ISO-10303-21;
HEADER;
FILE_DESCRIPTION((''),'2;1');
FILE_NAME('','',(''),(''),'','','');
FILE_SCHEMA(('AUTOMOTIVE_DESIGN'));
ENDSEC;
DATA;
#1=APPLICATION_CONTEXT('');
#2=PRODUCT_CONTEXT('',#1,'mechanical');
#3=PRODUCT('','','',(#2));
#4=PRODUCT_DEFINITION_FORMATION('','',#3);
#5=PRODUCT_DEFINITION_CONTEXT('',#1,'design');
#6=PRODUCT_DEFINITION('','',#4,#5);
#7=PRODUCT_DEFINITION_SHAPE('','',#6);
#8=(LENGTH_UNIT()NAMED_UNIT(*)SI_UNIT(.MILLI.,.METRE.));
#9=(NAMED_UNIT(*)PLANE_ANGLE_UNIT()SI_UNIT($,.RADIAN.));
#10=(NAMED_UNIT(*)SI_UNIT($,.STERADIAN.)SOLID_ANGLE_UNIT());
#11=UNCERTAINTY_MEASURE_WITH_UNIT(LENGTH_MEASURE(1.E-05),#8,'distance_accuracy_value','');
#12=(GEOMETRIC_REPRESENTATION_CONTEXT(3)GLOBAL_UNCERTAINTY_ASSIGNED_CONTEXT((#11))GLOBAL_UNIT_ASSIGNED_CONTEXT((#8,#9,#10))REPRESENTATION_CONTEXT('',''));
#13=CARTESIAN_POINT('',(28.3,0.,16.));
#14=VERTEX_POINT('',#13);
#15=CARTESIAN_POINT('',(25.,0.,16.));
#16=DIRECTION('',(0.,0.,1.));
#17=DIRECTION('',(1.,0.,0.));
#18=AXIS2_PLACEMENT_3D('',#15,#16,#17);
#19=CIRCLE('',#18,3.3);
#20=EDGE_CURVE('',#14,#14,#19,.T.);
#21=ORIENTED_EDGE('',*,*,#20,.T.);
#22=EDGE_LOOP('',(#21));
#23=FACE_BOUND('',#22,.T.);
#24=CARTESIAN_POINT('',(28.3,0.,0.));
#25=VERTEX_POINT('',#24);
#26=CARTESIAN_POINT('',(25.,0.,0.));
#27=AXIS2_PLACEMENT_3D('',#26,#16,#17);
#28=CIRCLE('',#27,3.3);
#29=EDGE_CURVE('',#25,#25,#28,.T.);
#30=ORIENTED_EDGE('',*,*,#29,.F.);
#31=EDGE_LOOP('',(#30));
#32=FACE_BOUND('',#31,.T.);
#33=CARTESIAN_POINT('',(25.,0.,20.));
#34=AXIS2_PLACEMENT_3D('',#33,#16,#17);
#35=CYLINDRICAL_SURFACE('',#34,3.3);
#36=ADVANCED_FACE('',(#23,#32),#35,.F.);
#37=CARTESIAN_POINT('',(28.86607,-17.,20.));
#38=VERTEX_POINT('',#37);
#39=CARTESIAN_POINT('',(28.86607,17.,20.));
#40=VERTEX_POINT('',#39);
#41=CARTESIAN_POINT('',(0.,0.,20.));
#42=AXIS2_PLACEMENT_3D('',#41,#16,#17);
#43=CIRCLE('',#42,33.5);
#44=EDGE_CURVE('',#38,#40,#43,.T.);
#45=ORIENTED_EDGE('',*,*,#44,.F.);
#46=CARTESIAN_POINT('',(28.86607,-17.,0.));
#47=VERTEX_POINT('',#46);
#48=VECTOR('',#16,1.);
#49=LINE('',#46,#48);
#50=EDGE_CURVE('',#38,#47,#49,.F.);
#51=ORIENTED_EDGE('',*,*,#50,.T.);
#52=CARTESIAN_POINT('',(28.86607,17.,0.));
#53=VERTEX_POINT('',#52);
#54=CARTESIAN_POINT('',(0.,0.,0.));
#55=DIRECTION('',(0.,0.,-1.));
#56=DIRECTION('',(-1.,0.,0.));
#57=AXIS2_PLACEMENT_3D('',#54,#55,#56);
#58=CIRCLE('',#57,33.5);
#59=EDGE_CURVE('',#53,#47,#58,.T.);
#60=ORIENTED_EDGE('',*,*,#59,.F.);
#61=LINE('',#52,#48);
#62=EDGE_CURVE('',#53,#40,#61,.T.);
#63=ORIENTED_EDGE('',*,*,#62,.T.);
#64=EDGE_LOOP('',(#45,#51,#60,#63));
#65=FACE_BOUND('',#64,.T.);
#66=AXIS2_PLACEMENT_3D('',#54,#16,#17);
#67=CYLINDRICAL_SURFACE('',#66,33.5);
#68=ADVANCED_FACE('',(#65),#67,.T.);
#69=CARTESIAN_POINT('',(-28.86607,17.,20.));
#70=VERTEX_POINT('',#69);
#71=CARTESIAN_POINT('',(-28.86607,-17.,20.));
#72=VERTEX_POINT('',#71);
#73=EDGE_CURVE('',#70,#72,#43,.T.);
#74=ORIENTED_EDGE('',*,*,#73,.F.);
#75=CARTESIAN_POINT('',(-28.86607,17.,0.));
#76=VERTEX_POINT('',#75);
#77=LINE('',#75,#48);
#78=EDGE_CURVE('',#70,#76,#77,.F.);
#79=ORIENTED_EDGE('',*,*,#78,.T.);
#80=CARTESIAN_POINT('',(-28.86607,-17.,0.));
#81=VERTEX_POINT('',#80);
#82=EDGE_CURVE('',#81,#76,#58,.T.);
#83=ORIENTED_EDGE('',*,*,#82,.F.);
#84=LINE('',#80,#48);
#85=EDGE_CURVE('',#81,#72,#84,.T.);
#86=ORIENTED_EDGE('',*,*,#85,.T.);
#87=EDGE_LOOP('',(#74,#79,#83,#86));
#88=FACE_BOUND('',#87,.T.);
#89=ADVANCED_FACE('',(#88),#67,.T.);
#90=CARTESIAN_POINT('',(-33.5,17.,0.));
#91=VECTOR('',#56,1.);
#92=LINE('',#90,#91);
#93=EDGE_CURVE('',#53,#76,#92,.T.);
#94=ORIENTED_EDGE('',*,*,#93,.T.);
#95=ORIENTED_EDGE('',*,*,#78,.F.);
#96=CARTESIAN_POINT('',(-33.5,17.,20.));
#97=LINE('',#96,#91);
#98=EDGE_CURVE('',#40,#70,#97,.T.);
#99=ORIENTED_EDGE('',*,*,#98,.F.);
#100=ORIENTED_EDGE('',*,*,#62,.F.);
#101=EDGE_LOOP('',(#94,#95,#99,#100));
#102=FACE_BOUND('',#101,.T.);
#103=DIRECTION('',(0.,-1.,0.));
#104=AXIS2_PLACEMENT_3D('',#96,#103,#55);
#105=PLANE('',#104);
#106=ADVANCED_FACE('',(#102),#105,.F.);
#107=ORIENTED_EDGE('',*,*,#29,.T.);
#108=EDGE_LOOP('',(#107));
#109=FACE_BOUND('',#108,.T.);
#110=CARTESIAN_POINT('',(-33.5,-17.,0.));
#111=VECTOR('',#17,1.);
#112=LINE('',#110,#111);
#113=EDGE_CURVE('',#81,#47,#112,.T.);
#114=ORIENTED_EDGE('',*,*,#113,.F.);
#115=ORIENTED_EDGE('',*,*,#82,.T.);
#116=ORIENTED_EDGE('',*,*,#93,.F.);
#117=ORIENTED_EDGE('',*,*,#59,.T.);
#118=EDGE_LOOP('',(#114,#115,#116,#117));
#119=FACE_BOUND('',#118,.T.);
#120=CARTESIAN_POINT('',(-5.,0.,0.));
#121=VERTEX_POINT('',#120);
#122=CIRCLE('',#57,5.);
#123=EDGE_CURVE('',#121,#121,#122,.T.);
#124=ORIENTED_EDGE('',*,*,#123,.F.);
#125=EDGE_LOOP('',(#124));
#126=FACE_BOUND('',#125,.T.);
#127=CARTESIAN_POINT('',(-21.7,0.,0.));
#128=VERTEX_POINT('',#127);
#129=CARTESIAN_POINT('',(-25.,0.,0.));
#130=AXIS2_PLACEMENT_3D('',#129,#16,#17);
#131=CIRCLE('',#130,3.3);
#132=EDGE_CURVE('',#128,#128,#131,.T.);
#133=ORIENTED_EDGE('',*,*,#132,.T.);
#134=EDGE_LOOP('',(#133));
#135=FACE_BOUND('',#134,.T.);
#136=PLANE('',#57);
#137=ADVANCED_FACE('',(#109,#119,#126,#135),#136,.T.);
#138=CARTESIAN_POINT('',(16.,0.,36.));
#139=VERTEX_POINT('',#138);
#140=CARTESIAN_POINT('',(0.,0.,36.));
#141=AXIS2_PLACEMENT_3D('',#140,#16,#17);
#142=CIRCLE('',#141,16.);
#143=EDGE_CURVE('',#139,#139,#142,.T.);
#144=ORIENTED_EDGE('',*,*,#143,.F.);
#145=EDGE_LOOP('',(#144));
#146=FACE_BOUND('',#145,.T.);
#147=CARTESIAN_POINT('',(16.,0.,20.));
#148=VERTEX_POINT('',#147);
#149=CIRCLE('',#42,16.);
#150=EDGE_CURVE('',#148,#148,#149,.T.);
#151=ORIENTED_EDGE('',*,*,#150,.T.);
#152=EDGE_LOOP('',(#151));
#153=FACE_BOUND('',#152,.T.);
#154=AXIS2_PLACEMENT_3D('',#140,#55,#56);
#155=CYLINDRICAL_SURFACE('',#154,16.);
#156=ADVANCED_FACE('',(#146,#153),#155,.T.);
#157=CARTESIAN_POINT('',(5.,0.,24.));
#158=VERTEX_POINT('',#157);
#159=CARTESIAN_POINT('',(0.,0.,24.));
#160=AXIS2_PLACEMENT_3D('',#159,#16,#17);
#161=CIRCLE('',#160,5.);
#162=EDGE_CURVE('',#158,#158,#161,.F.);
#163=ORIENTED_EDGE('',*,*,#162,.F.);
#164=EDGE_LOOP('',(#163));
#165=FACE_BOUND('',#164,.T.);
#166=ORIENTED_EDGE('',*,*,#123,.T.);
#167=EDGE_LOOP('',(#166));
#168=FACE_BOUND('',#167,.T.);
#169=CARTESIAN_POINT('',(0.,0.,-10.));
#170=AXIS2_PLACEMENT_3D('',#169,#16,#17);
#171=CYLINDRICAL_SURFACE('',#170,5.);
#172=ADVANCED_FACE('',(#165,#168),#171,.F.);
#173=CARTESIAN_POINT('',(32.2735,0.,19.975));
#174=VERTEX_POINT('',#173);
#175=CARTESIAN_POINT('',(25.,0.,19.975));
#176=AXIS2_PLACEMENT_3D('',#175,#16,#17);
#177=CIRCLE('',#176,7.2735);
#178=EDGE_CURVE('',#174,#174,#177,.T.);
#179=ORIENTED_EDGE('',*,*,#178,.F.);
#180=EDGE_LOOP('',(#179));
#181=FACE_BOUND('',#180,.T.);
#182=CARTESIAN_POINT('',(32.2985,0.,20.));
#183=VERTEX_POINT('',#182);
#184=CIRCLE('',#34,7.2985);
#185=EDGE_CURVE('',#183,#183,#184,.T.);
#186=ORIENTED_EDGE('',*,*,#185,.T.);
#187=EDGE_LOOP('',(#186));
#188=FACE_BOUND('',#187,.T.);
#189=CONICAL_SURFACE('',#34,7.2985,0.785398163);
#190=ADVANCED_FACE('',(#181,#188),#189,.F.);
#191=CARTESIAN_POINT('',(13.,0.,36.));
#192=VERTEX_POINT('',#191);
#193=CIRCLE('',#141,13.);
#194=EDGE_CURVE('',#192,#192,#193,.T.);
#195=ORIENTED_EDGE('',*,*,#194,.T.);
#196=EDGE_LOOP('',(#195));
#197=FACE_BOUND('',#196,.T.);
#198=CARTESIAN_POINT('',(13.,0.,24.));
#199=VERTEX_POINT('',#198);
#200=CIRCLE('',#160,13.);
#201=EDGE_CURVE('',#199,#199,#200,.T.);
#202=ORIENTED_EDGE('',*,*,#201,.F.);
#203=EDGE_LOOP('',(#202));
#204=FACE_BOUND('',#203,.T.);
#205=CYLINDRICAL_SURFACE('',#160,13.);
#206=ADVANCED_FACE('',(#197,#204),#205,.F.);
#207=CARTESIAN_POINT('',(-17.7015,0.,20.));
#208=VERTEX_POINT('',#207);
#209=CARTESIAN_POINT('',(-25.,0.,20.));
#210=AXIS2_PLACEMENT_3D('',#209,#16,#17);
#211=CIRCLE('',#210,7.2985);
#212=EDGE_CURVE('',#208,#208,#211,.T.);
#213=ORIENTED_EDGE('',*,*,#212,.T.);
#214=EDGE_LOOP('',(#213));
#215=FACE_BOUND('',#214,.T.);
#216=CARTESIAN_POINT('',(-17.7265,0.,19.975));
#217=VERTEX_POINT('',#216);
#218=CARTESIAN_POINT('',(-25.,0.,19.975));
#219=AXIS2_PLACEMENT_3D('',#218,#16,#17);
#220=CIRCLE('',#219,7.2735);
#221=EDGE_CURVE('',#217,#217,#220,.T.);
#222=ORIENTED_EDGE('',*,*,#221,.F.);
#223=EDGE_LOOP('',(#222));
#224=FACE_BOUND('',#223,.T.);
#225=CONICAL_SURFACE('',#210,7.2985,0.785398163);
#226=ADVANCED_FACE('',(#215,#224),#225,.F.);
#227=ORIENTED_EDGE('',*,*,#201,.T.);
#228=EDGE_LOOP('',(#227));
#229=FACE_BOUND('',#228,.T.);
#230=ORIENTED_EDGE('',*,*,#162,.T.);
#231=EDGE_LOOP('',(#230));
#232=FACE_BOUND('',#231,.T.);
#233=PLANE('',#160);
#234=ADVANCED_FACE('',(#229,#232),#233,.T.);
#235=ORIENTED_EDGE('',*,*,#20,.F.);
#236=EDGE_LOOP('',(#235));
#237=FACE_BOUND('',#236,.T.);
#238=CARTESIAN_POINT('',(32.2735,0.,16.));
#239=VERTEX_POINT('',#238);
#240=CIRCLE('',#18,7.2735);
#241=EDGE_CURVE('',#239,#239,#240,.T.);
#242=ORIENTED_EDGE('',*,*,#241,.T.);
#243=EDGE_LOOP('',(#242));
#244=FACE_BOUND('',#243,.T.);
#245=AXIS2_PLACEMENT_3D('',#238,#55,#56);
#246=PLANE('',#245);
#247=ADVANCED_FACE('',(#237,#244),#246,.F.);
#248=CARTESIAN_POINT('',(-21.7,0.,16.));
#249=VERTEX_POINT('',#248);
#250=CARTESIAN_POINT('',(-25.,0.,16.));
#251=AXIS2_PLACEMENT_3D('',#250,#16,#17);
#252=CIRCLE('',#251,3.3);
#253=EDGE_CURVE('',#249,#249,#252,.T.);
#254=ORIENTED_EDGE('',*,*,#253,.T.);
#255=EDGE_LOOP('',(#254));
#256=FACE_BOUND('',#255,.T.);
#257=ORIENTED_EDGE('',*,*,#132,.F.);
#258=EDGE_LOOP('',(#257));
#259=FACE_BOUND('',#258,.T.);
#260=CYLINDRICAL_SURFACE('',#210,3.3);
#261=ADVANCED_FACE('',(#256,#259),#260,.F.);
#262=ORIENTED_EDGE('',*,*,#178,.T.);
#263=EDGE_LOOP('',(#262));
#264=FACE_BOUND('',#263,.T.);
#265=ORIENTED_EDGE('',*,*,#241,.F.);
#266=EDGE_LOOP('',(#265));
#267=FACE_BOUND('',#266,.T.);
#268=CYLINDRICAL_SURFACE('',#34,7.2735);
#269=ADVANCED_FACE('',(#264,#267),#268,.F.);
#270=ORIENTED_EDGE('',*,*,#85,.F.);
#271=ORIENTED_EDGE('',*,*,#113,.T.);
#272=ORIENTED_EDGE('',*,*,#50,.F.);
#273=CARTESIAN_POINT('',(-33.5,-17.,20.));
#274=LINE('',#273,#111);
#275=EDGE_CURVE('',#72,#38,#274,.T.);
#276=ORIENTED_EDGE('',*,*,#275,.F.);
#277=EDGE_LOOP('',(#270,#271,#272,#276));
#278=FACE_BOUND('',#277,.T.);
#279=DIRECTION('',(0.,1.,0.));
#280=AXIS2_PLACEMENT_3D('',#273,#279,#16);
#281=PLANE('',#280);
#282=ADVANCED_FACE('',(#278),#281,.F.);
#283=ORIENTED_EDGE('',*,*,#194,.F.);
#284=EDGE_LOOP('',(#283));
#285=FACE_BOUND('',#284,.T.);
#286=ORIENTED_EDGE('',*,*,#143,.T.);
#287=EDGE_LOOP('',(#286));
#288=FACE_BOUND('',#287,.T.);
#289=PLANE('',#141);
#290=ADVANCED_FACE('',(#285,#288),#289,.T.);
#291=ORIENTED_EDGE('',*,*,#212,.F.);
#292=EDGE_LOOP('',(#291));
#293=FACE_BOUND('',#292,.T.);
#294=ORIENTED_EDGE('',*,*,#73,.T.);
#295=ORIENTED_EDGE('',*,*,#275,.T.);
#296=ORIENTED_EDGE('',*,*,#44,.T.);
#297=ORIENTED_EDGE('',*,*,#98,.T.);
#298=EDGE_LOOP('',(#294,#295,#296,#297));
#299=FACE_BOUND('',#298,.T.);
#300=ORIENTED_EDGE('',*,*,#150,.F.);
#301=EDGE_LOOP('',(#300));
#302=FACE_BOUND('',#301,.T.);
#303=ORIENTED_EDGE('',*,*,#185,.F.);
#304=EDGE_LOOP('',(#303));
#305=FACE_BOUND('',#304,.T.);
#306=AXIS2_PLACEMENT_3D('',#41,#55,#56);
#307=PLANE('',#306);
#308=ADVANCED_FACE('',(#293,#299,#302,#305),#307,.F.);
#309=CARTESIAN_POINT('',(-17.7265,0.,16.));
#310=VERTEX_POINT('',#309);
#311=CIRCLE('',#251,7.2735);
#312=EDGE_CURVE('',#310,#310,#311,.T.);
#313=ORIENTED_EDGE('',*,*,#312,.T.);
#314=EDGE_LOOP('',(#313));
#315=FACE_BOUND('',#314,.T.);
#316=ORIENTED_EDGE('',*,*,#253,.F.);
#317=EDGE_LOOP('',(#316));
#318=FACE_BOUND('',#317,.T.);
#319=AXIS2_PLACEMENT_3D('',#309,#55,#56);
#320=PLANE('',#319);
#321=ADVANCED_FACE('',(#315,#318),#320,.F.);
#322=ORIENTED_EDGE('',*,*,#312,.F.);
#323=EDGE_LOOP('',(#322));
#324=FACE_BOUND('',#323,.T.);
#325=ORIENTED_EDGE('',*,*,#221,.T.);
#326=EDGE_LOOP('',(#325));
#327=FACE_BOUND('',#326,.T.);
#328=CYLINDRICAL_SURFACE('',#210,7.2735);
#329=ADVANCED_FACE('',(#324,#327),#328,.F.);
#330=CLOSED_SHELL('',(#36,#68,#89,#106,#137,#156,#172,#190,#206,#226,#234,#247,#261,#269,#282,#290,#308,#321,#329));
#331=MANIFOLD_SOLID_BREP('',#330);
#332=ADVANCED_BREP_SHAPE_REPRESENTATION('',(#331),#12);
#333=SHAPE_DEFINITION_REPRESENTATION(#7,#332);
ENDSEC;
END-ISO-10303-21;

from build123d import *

# Parameters (mm, degrees)
SKETCH1_W                              = 67
SKETCH1_H                              = 34
BOSS_EXTRUDE1_DEPTH                    = 20
CUT_EXTRUDE1_START                     = -20
CUT_EXTRUDE1_DEPTH                     = 20
SKETCH3_R                              = 16
BOSS_EXTRUDE2_DEPTH                    = 16
CBORE_FOR_M6_HEX_HEAD_BOLT1_AT_2_COUNT = 2
CBORE_FOR_M6_HEX_HEAD_BOLT1_AT_2_PITCH = 50
SKETCH9_R                              = 5
CUT_EXTRUDE2_DEPTH                     = 46
SKETCH10_R                             = 13
CUT_EXTRUDE3_DEPTH                     = 12


# Read off the part's stored shape, not the designer's step: Cut-Extrude1
with BuildPart() as part:
    # Sketch1 → Boss-Extrude1 (new body)
    with BuildSketch(Plane.XY):
        Rectangle(SKETCH1_W, SKETCH1_H)
    extrude(amount=BOSS_EXTRUDE1_DEPTH)

    # Cut-Extrude1 outline → Cut-Extrude1 (cut)
    with BuildSketch(Plane.XY.offset(20).offset(CUT_EXTRUDE1_START)):
        with BuildLine():
            ThreePointArc((-33.5, -3.1e-08), (-32.320762268, 8.810126358), (-28.866070048, 17))
            Line((-28.866070048, 17), (-33.5, 17))
            Line((-33.5, 17), (-33.5, -3.1e-08))
        make_face()
        with BuildLine():
            ThreePointArc((-28.866070048, -17), (-32.32076226, -8.810126387), (-33.5, -3.1e-08))
            Line((-33.5, -3.1e-08), (-33.5, -17))
            Line((-33.5, -17), (-28.866070048, -17))
        make_face()
        with BuildLine():
            Line((33.5, 17), (28.866070048, 17))
            ThreePointArc((28.866070048, 17), (32.32076226, 8.810126387), (33.5, 3.1e-08))
            Line((33.5, 3.1e-08), (33.5, 17))
        make_face()
        with BuildLine():
            Line((33.5, -17), (33.5, 3.1e-08))
            ThreePointArc((33.5, 3.1e-08), (32.320762268, -8.810126358), (28.866070048, -17))
            Line((28.866070048, -17), (33.5, -17))
        make_face()
    extrude(amount=CUT_EXTRUDE1_DEPTH, mode=Mode.SUBTRACT)

    # Sketch3 → Boss-Extrude2 (add)
    with BuildSketch(Plane.XY.offset(20)):
        Circle(SKETCH3_R)
    extrude(amount=BOSS_EXTRUDE2_DEPTH)

    # Sketch8 → CBORE for M6 Hex Head Bolt1 (revolve, cut)
    with BuildSketch(Plane(origin=(-25, 0, 20), x_dir=(0, -1, 0), z_dir=(1, 0, 0))):
        Polygon((0, 0), (0, 20), (3.3, 20), (3.3, 4), (7.2735, 4), (7.2735, 0.025), (7.2985, 0), align=None)
    cbore_for_m6_hex_head_bolt1 = revolve(axis=Axis((-25, 0, 26.35), (0, 0, -1)), mode=Mode.SUBTRACT)

    # CBORE for M6 Hex Head Bolt1 at 2: CBORE for M6 Hex Head Bolt1 ×2
    with Locations(*[(i * CBORE_FOR_M6_HEX_HEAD_BOLT1_AT_2_PITCH, 0, 0) for i in range(1, CBORE_FOR_M6_HEX_HEAD_BOLT1_AT_2_COUNT)]):
        add(cbore_for_m6_hex_head_bolt1, mode=Mode.SUBTRACT)

    # Sketch9 → Cut-Extrude2 (cut)
    with BuildSketch(Plane.XY.offset(36)):
        Circle(SKETCH9_R)
    extrude(amount=-CUT_EXTRUDE2_DEPTH, mode=Mode.SUBTRACT)

    # Sketch10 → Cut-Extrude3 (cut)
    with BuildSketch(Plane.XY.offset(36)):
        Circle(SKETCH10_R)
    extrude(amount=-CUT_EXTRUDE3_DEPTH, mode=Mode.SUBTRACT)


solid = part.part
